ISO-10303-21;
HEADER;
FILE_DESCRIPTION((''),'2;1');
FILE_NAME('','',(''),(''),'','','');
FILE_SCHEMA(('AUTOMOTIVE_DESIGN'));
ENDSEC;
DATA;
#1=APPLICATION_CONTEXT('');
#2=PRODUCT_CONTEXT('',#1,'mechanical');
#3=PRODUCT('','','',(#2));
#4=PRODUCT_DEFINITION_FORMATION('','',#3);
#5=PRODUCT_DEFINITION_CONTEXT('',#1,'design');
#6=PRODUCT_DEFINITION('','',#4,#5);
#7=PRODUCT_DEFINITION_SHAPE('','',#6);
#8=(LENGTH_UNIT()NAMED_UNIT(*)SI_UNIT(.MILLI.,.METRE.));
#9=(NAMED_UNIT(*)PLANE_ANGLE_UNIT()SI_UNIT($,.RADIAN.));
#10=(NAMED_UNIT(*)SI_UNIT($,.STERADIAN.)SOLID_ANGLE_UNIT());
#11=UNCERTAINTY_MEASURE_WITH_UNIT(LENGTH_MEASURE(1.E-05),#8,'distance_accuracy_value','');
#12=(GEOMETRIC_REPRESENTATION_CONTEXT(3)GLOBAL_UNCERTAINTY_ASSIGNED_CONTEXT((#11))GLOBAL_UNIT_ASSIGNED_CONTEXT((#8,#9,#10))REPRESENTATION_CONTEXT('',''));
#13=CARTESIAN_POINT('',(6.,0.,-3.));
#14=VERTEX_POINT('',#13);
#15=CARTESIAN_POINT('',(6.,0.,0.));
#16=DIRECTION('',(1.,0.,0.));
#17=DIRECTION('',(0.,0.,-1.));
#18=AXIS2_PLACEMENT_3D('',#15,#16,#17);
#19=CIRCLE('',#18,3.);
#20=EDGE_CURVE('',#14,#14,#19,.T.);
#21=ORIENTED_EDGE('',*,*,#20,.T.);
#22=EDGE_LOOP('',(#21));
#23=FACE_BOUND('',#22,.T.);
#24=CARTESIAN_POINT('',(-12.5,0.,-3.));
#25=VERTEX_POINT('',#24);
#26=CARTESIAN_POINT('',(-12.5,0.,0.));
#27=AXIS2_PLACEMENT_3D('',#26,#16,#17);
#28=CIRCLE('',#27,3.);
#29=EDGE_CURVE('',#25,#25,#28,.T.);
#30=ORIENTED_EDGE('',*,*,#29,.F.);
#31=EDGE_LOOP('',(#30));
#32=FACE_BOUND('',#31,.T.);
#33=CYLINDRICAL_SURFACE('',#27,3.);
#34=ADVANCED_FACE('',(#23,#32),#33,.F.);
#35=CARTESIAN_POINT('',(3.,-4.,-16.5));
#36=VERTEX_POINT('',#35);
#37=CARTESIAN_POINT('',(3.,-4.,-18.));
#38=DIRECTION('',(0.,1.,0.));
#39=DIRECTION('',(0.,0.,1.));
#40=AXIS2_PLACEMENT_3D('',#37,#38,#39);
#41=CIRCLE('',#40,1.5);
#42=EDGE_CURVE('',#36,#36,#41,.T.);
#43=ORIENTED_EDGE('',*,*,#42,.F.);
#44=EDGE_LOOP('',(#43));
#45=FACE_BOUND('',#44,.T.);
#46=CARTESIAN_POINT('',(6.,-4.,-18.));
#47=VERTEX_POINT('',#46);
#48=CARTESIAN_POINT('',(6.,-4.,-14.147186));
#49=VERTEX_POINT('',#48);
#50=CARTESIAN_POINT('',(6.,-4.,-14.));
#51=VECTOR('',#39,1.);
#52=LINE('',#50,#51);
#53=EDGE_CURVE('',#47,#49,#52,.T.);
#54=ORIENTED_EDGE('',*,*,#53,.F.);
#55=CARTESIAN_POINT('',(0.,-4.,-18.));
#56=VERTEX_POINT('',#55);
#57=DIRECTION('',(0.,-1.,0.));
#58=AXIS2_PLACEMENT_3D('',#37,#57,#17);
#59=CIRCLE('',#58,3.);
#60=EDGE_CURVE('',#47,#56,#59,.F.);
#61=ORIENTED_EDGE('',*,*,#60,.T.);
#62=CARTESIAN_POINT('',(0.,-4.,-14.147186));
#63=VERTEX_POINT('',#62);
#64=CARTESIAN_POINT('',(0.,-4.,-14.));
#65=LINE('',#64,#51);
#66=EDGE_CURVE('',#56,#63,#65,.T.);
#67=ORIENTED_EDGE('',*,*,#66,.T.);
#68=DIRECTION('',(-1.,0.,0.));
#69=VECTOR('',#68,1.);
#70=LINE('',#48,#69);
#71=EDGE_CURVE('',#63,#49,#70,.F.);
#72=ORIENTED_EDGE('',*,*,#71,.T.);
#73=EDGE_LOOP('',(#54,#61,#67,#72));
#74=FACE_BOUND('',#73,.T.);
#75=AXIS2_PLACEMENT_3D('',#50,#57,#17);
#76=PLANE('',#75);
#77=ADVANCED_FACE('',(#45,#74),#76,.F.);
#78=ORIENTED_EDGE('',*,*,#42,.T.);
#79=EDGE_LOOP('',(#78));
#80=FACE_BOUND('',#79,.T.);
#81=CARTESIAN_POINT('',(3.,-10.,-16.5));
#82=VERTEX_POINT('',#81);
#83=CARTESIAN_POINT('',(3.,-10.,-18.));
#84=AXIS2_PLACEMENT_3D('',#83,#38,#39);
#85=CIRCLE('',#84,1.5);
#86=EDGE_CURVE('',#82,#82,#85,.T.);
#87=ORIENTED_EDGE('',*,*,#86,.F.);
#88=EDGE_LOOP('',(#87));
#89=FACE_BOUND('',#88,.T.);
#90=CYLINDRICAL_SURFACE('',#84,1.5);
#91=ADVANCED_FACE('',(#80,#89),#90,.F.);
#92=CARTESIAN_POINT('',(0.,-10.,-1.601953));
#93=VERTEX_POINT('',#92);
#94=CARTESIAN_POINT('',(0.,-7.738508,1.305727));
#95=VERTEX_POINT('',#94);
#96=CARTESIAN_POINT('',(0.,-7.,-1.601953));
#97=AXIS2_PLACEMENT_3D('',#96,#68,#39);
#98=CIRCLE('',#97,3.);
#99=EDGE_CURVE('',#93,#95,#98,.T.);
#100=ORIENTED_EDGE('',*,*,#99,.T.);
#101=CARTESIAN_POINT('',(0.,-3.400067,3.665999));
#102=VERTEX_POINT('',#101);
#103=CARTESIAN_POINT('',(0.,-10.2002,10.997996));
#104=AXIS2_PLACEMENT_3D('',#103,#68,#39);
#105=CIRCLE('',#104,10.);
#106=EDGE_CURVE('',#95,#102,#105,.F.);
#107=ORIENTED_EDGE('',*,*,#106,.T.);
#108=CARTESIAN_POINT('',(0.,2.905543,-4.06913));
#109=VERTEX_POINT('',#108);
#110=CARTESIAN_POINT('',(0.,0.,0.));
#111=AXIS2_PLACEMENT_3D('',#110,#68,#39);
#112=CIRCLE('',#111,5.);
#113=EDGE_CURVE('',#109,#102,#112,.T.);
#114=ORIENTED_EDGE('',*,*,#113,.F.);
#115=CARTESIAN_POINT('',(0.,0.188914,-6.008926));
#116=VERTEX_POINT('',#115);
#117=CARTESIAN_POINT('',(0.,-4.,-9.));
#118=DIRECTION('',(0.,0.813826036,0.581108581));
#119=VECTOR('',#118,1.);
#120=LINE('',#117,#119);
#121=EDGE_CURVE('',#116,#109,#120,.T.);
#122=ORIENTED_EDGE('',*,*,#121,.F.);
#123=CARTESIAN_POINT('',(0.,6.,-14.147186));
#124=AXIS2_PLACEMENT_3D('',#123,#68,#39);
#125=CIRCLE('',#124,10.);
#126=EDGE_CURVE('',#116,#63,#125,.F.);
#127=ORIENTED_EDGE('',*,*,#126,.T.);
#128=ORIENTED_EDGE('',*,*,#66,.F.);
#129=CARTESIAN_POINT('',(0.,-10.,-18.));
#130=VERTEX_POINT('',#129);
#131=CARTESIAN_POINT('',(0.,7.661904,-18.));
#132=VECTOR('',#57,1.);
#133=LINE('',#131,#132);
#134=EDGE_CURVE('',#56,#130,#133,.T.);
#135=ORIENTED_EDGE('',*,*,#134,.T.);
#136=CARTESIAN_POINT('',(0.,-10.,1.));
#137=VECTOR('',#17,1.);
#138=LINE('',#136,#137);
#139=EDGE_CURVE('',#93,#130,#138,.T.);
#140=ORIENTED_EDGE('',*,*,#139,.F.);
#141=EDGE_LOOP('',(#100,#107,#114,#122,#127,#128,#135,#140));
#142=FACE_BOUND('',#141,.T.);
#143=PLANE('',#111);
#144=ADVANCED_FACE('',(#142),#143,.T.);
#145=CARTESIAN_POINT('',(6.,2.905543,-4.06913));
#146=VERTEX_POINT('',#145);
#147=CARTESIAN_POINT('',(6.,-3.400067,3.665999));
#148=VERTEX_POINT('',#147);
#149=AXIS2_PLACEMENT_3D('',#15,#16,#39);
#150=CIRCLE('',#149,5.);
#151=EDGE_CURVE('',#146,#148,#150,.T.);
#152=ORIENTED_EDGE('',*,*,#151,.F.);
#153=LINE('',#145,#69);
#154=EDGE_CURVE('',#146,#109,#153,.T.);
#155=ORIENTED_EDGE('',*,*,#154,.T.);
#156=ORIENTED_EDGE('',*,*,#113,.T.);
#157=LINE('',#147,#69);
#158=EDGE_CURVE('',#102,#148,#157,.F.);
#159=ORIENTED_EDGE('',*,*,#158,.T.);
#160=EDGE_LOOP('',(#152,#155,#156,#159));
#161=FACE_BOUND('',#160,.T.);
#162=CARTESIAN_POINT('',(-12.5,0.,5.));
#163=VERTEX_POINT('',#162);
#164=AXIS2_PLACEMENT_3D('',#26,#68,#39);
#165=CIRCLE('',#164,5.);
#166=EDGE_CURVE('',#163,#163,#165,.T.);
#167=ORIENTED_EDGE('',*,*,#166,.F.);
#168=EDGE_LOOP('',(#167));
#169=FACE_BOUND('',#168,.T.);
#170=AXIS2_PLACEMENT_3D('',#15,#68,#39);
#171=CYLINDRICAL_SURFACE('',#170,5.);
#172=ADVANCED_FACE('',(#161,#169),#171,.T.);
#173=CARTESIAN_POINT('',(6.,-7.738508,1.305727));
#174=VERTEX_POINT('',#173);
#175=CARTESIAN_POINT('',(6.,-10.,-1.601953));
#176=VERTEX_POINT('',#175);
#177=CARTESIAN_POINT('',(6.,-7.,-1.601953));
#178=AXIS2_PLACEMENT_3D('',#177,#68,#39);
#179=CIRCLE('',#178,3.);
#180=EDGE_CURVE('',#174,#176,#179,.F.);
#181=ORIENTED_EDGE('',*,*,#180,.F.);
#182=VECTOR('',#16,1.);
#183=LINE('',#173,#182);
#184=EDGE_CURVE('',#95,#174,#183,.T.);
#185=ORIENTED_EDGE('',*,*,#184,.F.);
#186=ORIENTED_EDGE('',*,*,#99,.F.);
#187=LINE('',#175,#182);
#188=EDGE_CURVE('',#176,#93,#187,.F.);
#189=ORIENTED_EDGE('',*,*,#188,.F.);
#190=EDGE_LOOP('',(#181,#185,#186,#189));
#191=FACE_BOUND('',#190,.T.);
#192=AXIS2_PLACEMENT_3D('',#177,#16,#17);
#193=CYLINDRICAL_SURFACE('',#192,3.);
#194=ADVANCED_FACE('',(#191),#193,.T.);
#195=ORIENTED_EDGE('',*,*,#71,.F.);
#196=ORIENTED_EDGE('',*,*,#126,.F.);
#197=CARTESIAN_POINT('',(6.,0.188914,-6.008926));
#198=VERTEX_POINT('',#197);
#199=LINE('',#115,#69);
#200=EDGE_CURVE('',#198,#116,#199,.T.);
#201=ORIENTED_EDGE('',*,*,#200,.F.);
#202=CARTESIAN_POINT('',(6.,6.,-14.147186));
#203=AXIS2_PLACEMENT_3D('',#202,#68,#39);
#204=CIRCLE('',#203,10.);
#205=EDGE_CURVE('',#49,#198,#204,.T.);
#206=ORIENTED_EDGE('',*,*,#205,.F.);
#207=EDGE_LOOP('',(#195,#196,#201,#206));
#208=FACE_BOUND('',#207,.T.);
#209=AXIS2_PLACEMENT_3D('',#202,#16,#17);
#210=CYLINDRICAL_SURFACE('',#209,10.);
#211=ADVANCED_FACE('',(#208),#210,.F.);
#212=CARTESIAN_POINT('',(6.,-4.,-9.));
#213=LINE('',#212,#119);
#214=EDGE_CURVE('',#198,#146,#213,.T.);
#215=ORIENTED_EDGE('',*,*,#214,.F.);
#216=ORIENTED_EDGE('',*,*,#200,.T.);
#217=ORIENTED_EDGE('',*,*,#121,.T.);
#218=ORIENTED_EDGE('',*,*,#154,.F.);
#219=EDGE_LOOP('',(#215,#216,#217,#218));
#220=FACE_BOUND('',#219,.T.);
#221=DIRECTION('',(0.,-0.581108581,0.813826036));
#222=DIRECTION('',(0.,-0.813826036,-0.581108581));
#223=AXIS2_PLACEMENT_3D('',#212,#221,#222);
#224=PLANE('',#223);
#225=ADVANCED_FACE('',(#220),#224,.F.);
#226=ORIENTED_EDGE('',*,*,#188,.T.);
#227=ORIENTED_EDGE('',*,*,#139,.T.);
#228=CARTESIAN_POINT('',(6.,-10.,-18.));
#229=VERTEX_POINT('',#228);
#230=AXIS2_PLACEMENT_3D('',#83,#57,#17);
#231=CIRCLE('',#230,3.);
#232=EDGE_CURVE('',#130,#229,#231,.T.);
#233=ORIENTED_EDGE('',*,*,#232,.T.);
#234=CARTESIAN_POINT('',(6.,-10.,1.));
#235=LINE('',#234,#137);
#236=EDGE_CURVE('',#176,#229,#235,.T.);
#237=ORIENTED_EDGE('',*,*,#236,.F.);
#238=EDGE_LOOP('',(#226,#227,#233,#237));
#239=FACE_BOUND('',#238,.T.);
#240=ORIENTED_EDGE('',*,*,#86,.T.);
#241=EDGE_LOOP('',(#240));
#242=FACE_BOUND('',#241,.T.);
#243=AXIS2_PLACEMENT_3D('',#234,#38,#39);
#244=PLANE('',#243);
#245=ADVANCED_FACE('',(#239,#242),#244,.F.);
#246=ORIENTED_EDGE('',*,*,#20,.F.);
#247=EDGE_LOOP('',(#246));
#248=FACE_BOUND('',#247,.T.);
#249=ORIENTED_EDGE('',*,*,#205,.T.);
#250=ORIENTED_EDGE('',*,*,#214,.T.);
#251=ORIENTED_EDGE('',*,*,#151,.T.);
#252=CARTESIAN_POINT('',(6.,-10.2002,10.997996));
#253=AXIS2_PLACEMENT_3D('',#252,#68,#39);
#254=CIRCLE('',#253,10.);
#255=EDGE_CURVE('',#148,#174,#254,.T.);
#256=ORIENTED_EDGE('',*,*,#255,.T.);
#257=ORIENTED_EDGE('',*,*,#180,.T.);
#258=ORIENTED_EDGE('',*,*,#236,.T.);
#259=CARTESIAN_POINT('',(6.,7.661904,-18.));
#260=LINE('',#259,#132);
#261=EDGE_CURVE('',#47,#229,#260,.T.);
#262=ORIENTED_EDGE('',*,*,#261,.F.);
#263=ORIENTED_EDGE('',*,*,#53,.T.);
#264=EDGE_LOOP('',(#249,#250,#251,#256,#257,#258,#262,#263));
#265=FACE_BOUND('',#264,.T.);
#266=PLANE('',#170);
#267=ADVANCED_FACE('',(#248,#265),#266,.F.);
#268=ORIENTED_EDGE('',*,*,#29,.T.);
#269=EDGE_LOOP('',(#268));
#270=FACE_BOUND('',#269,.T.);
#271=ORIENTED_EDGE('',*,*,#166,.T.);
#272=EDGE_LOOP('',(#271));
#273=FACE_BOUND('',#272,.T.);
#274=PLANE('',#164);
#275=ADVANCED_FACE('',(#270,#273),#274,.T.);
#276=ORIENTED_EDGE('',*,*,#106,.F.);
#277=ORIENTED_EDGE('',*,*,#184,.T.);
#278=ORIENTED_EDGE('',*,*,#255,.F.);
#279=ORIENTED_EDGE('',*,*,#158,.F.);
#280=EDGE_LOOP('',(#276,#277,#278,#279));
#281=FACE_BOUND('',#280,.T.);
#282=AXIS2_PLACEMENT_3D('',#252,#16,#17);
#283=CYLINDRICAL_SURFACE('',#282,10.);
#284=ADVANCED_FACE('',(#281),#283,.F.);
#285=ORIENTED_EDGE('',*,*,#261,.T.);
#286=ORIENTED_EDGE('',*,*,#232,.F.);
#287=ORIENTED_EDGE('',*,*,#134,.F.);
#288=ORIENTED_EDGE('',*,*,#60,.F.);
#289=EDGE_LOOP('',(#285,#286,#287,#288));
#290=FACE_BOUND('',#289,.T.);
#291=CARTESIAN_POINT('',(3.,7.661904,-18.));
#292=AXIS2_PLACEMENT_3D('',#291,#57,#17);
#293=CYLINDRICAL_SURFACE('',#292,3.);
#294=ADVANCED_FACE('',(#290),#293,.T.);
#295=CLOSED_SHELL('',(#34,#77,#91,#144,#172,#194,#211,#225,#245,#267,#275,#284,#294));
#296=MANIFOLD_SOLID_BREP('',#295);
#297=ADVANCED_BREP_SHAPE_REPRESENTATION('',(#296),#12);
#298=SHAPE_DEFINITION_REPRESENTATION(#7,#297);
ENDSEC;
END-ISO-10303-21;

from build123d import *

# Parameters (mm, degrees)
BOSS_EXTRU_1_DEPTH      = 6
CONG_3_R                = 10
BOSS_EXTRU_2_START      = 12.5
ESQUISSE2_R             = 5
BOSS_EXTRU_2_DEPTH      = 12.5
ESQUISSE3_R             = 3
ENL_V_MAT_EXTRU_1_DEPTH = 27.424420523
BOSS_EXTRU_3_DEPTH      = 6
CONG_5_R                = 10
ESQUISSE5_R             = 1.5
ENL_V_MAT_EXTRU_2_DEPTH = 27.043233286
CONG_7_R                = 3


with BuildPart() as part:
    # Esquisse1 → Boss.-Extru.1 (new body)
    with BuildSketch(Plane(origin=(0, 0, 0), x_dir=(0, 0, -1), z_dir=(1, 0, 0))):
        with BuildLine():
            Line((-1, -4.898979486), (-1, -10))
            Line((-1, -10), (16, -10))
            Line((16, -10), (14, -4))
            Line((14, -4), (9, -4))
            Line((9, -4), (4.06913018, 2.905542906))
            ThreePointArc((4.06913018, 2.905542906), (-4.193153044, 2.723502808), (-1, -4.898979486))
        make_face()
    extrude(amount=BOSS_EXTRU_1_DEPTH)

    # Congé3
    # the kernel refuses this fillet: 10 mm, written as the material it adds along each edge
    with BuildSketch(Plane(origin=(0, -4.898979486, 1), x_dir=(0, -1, 0), z_dir=(1, 0, 0))) as cong_3_piece_1:
        with BuildLine():
            CenterArc((5.301220936, -9.997995789), CONG_3_R, 91.147140557, 41.697546603)
            Line((-1.498912679, -2.665998596), (-1.634915351, -2.519358652))
            ThreePointArc((-1.634915351, -2.519358652), (-0.714939835, -1.35240562), (-0.195959179, 0.04))
            Line((-0.195959179, 0.04), (0, 0.2))
            ThreePointArc((0, 0.2), (2.550510257, 0.2), (5.097016506, 0.199959916))
            Line((5.097016506, 0.199959916), (5.101020514, 0))
        make_face()
    extrude(amount=6)

    # Esquisse2 → Boss.-Extru.2 (add)
    with BuildSketch(Plane.ZY.offset(BOSS_EXTRU_2_START)):
        Circle(ESQUISSE2_R)
    extrude(amount=-BOSS_EXTRU_2_DEPTH)

    # Esquisse3 → Enlèv. mat.-Extru.1 (cut, through all)
    with BuildSketch(Plane(origin=(6, 0, 0), x_dir=(0, 0, -1), z_dir=(1, 0, 0))):
        Circle(ESQUISSE3_R)
    extrude(amount=-ENL_V_MAT_EXTRU_1_DEPTH, mode=Mode.SUBTRACT)

    # Esquisse4 → Boss.-Extru.3 (add)
    with BuildSketch(Plane.XZ.offset(10)):
        with BuildLine():
            Line((6, -11), (0, -11))
            Line((0, -11), (0, -18))
            ThreePointArc((0, -18), (3, -21), (6, -18))
            Line((6, -18), (6, -11))
        make_face()
    extrude(amount=-BOSS_EXTRU_3_DEPTH)

    # Congé5
    # the kernel refuses this fillet: 10 mm, written as the material it adds along each edge
    with BuildSketch(Plane(origin=(0, -4, -9), x_dir=(0, 0.813826036051075, 0.5811085811149191), z_dir=(1, 0, 0))) as cong_5_piece_1:
        with BuildLine():
            CenterArc((CONG_5_R * 0.514718625761, -CONG_5_R), CONG_5_R, 90, 54.471447841)
            Line((-CONG_5_R * 0.29910741029, -CONG_5_R * 0.418891418885), (0, 0))
            Line((0, 0), (CONG_5_R * 0.514718625761, 0))
        make_face()
    extrude(amount=6)

    # Esquisse5 → Enlèv. mat.-Extru.2 (cut, through all)
    with BuildSketch(Plane(origin=(0, -4, 0), x_dir=(1, 0, 0), z_dir=(0, 1, 0))):
        with Locations(Location((3, 18, 0), (0, 0, 270))):
            Circle(ESQUISSE5_R)
    extrude(amount=-ENL_V_MAT_EXTRU_2_DEPTH, mode=Mode.SUBTRACT)

    # Congé7
    cong_7_edges = [part.edges().sort_by_distance(p)[0] for p in [
        (3, -10, 1),
    ]]
    fillet(cong_7_edges, radius=CONG_7_R)


solid = part.part
